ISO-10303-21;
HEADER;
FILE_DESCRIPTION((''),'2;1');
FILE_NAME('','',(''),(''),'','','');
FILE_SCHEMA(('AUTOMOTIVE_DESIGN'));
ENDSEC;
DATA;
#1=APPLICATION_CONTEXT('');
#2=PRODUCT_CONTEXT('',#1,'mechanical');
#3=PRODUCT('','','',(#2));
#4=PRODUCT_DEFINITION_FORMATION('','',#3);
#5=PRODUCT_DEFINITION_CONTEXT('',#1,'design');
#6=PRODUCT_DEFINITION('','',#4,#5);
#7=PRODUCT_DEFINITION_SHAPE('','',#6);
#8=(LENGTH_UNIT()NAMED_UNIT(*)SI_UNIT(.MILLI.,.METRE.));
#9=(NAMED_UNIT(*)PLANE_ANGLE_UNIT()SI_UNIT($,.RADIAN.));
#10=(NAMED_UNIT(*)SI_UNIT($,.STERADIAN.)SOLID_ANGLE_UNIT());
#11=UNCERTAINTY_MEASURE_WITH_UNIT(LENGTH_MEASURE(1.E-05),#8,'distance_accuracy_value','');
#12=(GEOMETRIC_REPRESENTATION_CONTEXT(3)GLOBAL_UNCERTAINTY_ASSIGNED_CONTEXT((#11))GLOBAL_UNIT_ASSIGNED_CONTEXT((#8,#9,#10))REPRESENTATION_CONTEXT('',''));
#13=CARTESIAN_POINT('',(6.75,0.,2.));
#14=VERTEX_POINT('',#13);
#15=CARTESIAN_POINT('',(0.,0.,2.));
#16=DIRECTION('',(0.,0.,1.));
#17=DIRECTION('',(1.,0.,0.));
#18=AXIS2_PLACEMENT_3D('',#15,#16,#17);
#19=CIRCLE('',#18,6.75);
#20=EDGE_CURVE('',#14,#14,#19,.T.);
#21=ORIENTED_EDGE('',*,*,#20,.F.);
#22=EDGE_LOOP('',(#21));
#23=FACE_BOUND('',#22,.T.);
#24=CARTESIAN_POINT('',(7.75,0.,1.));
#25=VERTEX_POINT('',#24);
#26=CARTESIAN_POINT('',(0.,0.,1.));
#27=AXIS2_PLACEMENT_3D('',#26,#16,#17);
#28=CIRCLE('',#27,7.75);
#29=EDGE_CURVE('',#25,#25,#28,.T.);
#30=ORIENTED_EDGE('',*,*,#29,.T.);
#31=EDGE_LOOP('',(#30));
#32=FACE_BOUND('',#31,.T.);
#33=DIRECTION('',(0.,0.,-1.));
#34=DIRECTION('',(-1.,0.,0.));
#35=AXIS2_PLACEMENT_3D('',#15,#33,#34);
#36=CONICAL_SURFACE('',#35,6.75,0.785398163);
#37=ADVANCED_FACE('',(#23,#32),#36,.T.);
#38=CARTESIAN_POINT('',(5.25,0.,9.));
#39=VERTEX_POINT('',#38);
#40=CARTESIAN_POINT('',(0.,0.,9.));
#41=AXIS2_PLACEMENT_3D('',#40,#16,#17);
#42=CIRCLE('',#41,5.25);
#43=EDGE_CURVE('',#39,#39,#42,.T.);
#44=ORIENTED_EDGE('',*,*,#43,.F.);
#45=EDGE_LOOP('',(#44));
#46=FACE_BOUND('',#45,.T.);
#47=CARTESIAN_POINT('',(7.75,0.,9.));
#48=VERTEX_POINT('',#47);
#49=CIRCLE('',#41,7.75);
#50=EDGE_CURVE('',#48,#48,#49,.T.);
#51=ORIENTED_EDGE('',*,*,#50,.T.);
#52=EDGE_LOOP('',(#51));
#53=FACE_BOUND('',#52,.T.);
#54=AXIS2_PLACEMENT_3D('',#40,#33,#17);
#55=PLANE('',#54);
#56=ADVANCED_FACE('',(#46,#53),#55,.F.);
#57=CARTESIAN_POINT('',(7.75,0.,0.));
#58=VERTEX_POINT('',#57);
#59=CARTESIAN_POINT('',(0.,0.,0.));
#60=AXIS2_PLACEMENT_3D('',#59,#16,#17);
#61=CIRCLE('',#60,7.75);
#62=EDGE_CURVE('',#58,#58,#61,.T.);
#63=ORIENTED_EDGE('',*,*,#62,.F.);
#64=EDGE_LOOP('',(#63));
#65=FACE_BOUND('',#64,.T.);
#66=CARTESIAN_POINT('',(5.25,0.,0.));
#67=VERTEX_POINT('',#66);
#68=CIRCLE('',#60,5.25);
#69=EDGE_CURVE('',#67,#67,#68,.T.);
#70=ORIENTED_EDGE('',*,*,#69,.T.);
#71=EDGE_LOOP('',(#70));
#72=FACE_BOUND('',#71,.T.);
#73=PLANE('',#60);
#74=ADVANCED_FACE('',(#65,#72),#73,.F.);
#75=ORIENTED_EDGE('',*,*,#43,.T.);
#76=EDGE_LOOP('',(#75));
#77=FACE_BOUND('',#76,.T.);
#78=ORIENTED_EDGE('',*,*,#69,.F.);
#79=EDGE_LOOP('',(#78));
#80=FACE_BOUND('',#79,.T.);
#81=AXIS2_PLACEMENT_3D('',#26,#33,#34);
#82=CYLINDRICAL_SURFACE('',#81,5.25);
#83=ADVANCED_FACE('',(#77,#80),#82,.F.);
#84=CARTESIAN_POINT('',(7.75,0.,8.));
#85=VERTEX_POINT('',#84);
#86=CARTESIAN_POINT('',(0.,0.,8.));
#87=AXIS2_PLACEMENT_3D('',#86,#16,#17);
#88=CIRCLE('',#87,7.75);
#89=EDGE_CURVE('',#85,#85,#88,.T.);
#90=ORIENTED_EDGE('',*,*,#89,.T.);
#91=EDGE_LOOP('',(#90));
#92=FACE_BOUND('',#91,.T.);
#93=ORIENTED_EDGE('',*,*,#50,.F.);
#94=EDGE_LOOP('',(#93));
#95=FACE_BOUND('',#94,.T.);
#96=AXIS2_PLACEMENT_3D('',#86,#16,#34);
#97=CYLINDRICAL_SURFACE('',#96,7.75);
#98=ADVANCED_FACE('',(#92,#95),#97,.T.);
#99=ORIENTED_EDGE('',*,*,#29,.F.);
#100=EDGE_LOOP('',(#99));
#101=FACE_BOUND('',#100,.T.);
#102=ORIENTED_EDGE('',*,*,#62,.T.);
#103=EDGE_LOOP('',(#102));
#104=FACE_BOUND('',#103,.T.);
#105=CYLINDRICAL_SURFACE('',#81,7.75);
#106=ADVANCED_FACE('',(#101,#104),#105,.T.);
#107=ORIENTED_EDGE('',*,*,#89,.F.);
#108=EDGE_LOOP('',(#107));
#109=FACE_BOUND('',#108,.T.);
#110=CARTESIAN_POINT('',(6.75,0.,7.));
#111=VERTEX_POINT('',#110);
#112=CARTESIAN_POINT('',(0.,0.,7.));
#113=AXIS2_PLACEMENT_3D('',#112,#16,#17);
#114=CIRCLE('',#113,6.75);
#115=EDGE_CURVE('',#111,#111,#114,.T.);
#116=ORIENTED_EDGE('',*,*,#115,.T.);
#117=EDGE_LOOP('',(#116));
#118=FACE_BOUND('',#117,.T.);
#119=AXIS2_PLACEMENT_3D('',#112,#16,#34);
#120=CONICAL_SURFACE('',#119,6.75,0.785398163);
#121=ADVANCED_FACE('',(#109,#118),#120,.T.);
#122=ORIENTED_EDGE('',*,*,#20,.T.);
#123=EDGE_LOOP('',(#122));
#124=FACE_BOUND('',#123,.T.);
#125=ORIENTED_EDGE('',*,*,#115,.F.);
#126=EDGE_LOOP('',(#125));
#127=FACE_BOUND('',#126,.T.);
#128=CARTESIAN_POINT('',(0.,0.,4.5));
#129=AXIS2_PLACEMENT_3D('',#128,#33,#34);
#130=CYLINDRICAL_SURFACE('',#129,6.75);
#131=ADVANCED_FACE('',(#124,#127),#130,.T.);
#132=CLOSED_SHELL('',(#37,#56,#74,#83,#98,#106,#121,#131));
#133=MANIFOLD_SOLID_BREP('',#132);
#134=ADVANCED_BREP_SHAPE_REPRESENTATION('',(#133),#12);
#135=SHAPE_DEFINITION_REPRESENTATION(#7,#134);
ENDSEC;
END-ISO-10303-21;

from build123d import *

# Parameters (mm, degrees)
SKETCH1_R           = 7.75
SKETCH1_R_2         = 5.25
BOSS_EXTRUDE1_DEPTH = 1
SKETCH2_R           = 6.75
SKETCH2_R_2         = 5.25
BOSS_EXTRUDE2_DEPTH = 3.5
CHAMFER1_SIZE       = 1


with BuildPart() as part:
    # Sketch1 → Boss-Extrude1 (new body)
    with BuildSketch(Plane.XY):
        Circle(SKETCH1_R)
        Circle(SKETCH1_R_2, mode=Mode.SUBTRACT)
    extrude(amount=BOSS_EXTRUDE1_DEPTH)

    # Sketch2 → Boss-Extrude2 (add)
    with BuildSketch(Plane.XY.offset(1)):
        Circle(SKETCH2_R)
        Circle(SKETCH2_R_2, mode=Mode.SUBTRACT)
    extrude(amount=BOSS_EXTRUDE2_DEPTH)

    # Chamfer1
    chamfer1_edges = [part.edges().sort_by_distance(p)[0] for p in [
        (-6.75, 0, 1),
    ]]
    chamfer(chamfer1_edges, length=CHAMFER1_SIZE - 0.0001)  # a hair under: the kernel refuses the full size

    # Mirror5: part across plane


with BuildPart() as part_1:
    add(part.part)
    add(part.part.mirror(Plane.XY.offset(4.5)))


solid = part_1.part
